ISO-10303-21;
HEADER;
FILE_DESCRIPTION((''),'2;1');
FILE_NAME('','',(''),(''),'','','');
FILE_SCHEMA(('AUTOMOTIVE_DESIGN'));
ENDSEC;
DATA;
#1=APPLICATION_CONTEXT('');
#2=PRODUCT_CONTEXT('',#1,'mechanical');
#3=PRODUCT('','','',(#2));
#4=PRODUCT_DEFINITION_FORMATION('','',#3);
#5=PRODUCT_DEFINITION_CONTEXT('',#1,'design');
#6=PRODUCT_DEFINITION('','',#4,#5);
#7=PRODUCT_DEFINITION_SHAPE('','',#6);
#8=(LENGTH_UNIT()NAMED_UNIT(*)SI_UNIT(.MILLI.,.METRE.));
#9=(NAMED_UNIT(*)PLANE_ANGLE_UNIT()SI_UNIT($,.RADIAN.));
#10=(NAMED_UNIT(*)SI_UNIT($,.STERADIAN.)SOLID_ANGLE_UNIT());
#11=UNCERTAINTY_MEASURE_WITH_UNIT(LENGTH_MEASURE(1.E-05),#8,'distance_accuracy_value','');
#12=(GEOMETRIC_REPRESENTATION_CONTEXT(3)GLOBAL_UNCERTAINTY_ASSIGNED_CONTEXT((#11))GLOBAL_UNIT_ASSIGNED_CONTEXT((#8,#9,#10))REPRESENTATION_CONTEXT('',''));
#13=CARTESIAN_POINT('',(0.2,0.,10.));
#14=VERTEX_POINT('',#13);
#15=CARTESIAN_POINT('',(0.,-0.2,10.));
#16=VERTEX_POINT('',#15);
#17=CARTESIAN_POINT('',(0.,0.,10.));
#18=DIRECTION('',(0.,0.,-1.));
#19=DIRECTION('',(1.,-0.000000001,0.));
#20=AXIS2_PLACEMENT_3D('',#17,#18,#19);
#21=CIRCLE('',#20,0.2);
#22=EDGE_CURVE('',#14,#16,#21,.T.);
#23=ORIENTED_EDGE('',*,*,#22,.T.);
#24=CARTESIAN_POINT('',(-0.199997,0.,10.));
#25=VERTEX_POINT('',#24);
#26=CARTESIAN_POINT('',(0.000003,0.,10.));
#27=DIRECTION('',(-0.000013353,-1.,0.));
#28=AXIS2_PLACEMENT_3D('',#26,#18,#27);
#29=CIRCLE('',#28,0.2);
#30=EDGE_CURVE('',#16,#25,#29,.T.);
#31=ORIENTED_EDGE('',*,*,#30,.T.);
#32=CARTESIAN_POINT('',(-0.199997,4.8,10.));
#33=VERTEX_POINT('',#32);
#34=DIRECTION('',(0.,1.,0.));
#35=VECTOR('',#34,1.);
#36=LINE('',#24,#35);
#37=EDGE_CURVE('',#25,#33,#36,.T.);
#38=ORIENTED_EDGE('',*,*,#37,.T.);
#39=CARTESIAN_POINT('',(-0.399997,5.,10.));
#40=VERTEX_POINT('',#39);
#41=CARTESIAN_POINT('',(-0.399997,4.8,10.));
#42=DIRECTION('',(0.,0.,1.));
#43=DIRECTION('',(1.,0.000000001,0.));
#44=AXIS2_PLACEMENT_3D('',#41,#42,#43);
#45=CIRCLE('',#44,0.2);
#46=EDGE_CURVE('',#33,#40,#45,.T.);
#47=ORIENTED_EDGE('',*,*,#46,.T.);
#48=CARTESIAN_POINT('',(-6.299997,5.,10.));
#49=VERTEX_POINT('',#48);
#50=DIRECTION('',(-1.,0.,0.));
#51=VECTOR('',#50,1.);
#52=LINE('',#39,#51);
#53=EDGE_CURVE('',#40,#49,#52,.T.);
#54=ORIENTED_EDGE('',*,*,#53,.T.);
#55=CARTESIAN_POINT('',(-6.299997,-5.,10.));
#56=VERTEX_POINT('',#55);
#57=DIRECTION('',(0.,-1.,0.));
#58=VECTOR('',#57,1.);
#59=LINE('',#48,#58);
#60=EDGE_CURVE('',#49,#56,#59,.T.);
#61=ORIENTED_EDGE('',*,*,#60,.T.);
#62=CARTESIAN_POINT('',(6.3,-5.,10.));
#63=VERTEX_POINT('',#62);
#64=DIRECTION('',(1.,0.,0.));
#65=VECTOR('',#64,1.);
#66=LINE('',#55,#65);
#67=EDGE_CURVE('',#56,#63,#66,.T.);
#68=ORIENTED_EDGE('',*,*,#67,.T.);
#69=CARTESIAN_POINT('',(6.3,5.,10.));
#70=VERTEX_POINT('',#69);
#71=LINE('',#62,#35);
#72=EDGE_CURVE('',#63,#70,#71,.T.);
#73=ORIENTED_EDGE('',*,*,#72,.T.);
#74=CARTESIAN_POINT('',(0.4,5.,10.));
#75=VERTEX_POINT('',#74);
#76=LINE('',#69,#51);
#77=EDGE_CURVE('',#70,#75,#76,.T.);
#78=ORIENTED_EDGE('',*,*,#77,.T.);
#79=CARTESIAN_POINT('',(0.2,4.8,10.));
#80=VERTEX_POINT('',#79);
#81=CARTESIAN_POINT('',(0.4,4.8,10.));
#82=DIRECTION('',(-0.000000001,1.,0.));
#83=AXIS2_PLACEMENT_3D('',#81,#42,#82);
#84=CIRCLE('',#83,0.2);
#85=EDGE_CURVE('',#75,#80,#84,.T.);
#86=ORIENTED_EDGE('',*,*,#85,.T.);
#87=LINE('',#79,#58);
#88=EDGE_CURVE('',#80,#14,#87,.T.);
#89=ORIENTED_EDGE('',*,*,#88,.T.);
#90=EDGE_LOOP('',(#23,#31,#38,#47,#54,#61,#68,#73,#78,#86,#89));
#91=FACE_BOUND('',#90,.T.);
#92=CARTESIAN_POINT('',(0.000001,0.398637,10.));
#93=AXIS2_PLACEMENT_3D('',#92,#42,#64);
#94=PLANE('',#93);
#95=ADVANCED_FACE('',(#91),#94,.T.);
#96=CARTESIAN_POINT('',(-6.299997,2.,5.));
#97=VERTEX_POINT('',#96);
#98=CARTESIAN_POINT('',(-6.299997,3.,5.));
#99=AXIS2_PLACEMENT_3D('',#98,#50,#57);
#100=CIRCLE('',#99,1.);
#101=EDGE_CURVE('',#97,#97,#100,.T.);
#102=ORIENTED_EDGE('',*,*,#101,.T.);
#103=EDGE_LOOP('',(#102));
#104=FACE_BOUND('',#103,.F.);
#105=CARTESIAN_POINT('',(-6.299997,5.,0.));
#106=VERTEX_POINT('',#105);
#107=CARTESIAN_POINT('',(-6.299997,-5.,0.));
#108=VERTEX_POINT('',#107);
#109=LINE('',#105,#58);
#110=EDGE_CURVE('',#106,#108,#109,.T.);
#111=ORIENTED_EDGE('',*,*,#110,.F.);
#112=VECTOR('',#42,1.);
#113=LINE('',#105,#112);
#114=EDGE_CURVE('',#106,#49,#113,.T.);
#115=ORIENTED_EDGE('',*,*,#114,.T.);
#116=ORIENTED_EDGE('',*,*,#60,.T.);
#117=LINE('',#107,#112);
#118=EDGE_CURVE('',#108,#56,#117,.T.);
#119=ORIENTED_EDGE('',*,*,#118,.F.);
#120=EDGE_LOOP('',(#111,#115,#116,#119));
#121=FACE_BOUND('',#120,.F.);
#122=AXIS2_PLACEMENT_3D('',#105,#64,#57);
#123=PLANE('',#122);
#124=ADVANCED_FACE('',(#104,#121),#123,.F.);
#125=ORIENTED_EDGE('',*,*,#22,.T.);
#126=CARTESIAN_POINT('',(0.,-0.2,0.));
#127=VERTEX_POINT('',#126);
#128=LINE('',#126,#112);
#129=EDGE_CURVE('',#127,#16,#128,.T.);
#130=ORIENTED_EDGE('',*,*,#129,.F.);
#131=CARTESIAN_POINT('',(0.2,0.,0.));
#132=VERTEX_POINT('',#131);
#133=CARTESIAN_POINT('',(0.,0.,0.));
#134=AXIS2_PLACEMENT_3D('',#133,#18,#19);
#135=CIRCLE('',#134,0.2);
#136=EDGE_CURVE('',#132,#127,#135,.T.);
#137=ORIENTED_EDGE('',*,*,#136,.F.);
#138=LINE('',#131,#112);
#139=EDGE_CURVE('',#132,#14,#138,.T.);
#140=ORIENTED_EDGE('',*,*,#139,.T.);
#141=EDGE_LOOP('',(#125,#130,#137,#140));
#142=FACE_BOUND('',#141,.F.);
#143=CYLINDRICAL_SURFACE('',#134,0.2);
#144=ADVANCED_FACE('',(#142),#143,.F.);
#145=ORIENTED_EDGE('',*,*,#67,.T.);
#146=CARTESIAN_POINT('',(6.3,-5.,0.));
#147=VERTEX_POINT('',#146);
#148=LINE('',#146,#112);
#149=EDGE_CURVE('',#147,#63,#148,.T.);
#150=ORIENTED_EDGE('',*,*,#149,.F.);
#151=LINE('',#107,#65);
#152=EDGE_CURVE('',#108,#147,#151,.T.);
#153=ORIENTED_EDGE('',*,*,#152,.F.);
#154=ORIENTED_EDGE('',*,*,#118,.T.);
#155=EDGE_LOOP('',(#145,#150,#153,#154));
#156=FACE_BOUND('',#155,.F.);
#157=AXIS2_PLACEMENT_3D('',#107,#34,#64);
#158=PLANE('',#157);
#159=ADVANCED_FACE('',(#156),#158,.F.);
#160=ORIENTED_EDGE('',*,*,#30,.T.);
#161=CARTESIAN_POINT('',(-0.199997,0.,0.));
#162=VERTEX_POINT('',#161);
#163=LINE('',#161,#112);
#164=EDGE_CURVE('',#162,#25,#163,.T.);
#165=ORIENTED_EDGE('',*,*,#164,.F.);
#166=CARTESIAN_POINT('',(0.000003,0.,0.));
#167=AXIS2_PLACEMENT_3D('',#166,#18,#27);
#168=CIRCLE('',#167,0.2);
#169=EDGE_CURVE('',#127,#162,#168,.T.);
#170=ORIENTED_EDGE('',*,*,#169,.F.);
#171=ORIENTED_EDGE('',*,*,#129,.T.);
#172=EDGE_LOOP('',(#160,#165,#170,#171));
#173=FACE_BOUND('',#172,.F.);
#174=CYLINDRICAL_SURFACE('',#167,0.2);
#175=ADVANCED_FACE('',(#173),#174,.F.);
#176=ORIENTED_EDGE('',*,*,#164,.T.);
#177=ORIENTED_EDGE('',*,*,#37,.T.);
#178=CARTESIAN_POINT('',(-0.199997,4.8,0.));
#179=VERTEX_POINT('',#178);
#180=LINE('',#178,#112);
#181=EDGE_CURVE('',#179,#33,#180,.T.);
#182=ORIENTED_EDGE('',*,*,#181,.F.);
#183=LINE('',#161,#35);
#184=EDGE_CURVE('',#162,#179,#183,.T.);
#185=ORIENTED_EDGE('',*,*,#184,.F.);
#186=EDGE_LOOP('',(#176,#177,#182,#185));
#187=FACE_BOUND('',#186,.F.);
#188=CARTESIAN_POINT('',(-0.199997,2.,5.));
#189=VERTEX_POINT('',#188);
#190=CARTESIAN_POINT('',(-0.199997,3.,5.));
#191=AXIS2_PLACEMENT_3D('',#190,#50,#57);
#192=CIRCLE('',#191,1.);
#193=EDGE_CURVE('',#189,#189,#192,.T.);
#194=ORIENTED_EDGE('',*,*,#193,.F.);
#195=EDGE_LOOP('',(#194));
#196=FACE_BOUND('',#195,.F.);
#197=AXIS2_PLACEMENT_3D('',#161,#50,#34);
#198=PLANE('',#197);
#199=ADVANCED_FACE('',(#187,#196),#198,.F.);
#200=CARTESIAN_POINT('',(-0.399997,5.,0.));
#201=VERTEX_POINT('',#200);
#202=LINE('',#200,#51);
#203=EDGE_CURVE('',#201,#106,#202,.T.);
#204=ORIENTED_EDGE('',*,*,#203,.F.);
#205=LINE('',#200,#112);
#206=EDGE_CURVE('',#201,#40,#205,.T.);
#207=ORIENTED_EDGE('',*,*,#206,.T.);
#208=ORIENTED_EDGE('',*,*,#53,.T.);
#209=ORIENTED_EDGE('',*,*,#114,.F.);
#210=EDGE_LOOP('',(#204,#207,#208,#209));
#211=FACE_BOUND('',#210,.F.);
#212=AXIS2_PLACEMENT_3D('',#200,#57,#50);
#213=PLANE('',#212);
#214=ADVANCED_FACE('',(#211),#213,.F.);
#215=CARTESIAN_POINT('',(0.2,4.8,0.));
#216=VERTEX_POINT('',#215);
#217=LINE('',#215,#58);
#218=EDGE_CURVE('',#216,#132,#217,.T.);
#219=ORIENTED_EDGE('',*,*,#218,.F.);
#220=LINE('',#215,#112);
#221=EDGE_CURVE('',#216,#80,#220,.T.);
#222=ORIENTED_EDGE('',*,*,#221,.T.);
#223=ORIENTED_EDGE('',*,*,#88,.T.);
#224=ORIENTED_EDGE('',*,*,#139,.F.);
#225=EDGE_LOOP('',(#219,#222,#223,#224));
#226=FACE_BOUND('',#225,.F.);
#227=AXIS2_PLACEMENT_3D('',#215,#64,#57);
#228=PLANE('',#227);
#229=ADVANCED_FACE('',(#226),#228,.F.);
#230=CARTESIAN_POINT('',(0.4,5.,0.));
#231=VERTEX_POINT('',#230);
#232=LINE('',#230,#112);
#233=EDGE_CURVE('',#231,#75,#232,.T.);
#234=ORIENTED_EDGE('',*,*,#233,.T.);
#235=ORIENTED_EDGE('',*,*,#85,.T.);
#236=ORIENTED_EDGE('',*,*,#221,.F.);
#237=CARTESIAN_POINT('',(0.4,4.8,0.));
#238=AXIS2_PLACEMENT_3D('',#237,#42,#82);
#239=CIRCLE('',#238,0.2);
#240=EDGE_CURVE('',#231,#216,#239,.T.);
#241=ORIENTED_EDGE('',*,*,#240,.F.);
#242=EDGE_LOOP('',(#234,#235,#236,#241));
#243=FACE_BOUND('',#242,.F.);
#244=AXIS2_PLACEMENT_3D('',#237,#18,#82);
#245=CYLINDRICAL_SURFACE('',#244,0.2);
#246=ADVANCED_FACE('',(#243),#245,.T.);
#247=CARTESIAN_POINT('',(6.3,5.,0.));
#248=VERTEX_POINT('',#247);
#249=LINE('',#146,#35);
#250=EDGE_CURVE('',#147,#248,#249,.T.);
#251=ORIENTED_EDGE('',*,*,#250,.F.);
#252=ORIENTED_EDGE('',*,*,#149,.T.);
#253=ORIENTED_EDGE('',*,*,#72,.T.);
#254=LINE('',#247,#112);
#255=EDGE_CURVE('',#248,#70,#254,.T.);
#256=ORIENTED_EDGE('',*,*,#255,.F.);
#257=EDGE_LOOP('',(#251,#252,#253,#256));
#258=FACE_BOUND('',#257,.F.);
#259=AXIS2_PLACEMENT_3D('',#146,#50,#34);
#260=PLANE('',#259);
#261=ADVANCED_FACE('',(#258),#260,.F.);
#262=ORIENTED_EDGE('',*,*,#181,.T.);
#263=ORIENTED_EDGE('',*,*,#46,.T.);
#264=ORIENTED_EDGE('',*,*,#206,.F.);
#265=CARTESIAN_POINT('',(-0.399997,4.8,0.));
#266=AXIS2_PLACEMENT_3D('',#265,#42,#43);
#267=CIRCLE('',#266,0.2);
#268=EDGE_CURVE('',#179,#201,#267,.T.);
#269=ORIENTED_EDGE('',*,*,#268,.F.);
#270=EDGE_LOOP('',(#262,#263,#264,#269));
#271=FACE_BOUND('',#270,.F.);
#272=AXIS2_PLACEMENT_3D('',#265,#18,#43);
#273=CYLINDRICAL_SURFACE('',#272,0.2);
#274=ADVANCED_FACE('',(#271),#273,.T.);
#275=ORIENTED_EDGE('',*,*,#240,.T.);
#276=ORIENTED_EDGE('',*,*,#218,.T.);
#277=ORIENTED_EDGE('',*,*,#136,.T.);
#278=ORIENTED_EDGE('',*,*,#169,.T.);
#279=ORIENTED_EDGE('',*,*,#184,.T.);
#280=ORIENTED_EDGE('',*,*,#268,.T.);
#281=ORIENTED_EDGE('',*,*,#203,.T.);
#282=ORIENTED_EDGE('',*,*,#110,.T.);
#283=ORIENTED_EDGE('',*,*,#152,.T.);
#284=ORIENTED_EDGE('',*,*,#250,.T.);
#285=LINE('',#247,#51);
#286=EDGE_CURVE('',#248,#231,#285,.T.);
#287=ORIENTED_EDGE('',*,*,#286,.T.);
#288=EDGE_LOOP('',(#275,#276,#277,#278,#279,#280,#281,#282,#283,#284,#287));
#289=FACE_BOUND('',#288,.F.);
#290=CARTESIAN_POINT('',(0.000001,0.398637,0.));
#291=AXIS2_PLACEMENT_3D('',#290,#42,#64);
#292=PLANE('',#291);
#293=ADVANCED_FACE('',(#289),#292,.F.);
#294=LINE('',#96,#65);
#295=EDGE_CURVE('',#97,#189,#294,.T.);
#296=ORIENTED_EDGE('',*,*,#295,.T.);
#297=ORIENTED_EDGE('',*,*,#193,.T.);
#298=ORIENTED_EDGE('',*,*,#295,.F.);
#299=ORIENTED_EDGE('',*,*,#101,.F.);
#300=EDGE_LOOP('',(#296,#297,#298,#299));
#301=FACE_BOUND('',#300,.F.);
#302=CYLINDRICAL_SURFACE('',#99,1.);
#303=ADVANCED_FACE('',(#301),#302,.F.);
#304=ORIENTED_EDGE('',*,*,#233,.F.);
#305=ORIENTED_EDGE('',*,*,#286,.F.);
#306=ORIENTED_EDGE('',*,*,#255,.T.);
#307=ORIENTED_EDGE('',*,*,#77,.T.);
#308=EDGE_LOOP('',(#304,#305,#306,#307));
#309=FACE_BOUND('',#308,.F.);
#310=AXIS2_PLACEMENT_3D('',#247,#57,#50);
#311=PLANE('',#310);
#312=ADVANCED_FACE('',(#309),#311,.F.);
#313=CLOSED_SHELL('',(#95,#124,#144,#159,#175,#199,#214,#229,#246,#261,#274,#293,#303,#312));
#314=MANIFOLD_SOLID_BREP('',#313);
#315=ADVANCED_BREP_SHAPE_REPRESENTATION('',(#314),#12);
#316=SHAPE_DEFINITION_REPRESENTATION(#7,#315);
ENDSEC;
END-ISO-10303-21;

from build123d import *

# Parameters (mm, degrees)
F1_DEPTH = 10
F2_R     = 1
F3_DEPTH = 6.2


# Not quite as in the source:
# - ends of sketch curves that miss each other by under 0.0002 mm in the source are joined


with BuildPart() as f1:
    # F0 (on Top) → F1 (new body)
    with BuildSketch(Plane.XY):
        with BuildLine():
            Line((-0.3999973293, 5), (-6.2999973293, 5))
            Line((-6.2999973293, 5), (-6.2999973293, -5))
            Line((-6.2999973293, -5), (6.3, -5))
            Line((6.3, -5), (6.3, 5))
            Line((6.3, 5), (0.4, 5))
            ThreePointArc((0.4, 5), (0.2585786438, 4.9414213562), (0.2, 4.8))
            Line((0.2, 4.8), (0.2, 0))
            ThreePointArc((0.2, 0), (0.1414213562, -0.1414213562), (0, -0.2))
            ThreePointArc((0, -0.2), (-0.1414186856, -0.1414213562), (-0.1999973293, 0))
            Line((-0.1999973293, 0), (-0.1999973293, 4.8))
            ThreePointArc((-0.1999973293, 4.8), (-0.2585759731, 4.9414213562), (-0.3999973293, 5))
        make_face()
    extrude(amount=F1_DEPTH)

    # F2 (on face) → F3 (cut)
    with BuildSketch(Plane(origin=(-6.2999973293, 0, 0), x_dir=(0, -1, 0), z_dir=(-1, 0, 0))):
        with Locations((-3, 5)):
            Circle(F2_R)
    extrude(amount=-F3_DEPTH, mode=Mode.SUBTRACT)


solid = f1.part
